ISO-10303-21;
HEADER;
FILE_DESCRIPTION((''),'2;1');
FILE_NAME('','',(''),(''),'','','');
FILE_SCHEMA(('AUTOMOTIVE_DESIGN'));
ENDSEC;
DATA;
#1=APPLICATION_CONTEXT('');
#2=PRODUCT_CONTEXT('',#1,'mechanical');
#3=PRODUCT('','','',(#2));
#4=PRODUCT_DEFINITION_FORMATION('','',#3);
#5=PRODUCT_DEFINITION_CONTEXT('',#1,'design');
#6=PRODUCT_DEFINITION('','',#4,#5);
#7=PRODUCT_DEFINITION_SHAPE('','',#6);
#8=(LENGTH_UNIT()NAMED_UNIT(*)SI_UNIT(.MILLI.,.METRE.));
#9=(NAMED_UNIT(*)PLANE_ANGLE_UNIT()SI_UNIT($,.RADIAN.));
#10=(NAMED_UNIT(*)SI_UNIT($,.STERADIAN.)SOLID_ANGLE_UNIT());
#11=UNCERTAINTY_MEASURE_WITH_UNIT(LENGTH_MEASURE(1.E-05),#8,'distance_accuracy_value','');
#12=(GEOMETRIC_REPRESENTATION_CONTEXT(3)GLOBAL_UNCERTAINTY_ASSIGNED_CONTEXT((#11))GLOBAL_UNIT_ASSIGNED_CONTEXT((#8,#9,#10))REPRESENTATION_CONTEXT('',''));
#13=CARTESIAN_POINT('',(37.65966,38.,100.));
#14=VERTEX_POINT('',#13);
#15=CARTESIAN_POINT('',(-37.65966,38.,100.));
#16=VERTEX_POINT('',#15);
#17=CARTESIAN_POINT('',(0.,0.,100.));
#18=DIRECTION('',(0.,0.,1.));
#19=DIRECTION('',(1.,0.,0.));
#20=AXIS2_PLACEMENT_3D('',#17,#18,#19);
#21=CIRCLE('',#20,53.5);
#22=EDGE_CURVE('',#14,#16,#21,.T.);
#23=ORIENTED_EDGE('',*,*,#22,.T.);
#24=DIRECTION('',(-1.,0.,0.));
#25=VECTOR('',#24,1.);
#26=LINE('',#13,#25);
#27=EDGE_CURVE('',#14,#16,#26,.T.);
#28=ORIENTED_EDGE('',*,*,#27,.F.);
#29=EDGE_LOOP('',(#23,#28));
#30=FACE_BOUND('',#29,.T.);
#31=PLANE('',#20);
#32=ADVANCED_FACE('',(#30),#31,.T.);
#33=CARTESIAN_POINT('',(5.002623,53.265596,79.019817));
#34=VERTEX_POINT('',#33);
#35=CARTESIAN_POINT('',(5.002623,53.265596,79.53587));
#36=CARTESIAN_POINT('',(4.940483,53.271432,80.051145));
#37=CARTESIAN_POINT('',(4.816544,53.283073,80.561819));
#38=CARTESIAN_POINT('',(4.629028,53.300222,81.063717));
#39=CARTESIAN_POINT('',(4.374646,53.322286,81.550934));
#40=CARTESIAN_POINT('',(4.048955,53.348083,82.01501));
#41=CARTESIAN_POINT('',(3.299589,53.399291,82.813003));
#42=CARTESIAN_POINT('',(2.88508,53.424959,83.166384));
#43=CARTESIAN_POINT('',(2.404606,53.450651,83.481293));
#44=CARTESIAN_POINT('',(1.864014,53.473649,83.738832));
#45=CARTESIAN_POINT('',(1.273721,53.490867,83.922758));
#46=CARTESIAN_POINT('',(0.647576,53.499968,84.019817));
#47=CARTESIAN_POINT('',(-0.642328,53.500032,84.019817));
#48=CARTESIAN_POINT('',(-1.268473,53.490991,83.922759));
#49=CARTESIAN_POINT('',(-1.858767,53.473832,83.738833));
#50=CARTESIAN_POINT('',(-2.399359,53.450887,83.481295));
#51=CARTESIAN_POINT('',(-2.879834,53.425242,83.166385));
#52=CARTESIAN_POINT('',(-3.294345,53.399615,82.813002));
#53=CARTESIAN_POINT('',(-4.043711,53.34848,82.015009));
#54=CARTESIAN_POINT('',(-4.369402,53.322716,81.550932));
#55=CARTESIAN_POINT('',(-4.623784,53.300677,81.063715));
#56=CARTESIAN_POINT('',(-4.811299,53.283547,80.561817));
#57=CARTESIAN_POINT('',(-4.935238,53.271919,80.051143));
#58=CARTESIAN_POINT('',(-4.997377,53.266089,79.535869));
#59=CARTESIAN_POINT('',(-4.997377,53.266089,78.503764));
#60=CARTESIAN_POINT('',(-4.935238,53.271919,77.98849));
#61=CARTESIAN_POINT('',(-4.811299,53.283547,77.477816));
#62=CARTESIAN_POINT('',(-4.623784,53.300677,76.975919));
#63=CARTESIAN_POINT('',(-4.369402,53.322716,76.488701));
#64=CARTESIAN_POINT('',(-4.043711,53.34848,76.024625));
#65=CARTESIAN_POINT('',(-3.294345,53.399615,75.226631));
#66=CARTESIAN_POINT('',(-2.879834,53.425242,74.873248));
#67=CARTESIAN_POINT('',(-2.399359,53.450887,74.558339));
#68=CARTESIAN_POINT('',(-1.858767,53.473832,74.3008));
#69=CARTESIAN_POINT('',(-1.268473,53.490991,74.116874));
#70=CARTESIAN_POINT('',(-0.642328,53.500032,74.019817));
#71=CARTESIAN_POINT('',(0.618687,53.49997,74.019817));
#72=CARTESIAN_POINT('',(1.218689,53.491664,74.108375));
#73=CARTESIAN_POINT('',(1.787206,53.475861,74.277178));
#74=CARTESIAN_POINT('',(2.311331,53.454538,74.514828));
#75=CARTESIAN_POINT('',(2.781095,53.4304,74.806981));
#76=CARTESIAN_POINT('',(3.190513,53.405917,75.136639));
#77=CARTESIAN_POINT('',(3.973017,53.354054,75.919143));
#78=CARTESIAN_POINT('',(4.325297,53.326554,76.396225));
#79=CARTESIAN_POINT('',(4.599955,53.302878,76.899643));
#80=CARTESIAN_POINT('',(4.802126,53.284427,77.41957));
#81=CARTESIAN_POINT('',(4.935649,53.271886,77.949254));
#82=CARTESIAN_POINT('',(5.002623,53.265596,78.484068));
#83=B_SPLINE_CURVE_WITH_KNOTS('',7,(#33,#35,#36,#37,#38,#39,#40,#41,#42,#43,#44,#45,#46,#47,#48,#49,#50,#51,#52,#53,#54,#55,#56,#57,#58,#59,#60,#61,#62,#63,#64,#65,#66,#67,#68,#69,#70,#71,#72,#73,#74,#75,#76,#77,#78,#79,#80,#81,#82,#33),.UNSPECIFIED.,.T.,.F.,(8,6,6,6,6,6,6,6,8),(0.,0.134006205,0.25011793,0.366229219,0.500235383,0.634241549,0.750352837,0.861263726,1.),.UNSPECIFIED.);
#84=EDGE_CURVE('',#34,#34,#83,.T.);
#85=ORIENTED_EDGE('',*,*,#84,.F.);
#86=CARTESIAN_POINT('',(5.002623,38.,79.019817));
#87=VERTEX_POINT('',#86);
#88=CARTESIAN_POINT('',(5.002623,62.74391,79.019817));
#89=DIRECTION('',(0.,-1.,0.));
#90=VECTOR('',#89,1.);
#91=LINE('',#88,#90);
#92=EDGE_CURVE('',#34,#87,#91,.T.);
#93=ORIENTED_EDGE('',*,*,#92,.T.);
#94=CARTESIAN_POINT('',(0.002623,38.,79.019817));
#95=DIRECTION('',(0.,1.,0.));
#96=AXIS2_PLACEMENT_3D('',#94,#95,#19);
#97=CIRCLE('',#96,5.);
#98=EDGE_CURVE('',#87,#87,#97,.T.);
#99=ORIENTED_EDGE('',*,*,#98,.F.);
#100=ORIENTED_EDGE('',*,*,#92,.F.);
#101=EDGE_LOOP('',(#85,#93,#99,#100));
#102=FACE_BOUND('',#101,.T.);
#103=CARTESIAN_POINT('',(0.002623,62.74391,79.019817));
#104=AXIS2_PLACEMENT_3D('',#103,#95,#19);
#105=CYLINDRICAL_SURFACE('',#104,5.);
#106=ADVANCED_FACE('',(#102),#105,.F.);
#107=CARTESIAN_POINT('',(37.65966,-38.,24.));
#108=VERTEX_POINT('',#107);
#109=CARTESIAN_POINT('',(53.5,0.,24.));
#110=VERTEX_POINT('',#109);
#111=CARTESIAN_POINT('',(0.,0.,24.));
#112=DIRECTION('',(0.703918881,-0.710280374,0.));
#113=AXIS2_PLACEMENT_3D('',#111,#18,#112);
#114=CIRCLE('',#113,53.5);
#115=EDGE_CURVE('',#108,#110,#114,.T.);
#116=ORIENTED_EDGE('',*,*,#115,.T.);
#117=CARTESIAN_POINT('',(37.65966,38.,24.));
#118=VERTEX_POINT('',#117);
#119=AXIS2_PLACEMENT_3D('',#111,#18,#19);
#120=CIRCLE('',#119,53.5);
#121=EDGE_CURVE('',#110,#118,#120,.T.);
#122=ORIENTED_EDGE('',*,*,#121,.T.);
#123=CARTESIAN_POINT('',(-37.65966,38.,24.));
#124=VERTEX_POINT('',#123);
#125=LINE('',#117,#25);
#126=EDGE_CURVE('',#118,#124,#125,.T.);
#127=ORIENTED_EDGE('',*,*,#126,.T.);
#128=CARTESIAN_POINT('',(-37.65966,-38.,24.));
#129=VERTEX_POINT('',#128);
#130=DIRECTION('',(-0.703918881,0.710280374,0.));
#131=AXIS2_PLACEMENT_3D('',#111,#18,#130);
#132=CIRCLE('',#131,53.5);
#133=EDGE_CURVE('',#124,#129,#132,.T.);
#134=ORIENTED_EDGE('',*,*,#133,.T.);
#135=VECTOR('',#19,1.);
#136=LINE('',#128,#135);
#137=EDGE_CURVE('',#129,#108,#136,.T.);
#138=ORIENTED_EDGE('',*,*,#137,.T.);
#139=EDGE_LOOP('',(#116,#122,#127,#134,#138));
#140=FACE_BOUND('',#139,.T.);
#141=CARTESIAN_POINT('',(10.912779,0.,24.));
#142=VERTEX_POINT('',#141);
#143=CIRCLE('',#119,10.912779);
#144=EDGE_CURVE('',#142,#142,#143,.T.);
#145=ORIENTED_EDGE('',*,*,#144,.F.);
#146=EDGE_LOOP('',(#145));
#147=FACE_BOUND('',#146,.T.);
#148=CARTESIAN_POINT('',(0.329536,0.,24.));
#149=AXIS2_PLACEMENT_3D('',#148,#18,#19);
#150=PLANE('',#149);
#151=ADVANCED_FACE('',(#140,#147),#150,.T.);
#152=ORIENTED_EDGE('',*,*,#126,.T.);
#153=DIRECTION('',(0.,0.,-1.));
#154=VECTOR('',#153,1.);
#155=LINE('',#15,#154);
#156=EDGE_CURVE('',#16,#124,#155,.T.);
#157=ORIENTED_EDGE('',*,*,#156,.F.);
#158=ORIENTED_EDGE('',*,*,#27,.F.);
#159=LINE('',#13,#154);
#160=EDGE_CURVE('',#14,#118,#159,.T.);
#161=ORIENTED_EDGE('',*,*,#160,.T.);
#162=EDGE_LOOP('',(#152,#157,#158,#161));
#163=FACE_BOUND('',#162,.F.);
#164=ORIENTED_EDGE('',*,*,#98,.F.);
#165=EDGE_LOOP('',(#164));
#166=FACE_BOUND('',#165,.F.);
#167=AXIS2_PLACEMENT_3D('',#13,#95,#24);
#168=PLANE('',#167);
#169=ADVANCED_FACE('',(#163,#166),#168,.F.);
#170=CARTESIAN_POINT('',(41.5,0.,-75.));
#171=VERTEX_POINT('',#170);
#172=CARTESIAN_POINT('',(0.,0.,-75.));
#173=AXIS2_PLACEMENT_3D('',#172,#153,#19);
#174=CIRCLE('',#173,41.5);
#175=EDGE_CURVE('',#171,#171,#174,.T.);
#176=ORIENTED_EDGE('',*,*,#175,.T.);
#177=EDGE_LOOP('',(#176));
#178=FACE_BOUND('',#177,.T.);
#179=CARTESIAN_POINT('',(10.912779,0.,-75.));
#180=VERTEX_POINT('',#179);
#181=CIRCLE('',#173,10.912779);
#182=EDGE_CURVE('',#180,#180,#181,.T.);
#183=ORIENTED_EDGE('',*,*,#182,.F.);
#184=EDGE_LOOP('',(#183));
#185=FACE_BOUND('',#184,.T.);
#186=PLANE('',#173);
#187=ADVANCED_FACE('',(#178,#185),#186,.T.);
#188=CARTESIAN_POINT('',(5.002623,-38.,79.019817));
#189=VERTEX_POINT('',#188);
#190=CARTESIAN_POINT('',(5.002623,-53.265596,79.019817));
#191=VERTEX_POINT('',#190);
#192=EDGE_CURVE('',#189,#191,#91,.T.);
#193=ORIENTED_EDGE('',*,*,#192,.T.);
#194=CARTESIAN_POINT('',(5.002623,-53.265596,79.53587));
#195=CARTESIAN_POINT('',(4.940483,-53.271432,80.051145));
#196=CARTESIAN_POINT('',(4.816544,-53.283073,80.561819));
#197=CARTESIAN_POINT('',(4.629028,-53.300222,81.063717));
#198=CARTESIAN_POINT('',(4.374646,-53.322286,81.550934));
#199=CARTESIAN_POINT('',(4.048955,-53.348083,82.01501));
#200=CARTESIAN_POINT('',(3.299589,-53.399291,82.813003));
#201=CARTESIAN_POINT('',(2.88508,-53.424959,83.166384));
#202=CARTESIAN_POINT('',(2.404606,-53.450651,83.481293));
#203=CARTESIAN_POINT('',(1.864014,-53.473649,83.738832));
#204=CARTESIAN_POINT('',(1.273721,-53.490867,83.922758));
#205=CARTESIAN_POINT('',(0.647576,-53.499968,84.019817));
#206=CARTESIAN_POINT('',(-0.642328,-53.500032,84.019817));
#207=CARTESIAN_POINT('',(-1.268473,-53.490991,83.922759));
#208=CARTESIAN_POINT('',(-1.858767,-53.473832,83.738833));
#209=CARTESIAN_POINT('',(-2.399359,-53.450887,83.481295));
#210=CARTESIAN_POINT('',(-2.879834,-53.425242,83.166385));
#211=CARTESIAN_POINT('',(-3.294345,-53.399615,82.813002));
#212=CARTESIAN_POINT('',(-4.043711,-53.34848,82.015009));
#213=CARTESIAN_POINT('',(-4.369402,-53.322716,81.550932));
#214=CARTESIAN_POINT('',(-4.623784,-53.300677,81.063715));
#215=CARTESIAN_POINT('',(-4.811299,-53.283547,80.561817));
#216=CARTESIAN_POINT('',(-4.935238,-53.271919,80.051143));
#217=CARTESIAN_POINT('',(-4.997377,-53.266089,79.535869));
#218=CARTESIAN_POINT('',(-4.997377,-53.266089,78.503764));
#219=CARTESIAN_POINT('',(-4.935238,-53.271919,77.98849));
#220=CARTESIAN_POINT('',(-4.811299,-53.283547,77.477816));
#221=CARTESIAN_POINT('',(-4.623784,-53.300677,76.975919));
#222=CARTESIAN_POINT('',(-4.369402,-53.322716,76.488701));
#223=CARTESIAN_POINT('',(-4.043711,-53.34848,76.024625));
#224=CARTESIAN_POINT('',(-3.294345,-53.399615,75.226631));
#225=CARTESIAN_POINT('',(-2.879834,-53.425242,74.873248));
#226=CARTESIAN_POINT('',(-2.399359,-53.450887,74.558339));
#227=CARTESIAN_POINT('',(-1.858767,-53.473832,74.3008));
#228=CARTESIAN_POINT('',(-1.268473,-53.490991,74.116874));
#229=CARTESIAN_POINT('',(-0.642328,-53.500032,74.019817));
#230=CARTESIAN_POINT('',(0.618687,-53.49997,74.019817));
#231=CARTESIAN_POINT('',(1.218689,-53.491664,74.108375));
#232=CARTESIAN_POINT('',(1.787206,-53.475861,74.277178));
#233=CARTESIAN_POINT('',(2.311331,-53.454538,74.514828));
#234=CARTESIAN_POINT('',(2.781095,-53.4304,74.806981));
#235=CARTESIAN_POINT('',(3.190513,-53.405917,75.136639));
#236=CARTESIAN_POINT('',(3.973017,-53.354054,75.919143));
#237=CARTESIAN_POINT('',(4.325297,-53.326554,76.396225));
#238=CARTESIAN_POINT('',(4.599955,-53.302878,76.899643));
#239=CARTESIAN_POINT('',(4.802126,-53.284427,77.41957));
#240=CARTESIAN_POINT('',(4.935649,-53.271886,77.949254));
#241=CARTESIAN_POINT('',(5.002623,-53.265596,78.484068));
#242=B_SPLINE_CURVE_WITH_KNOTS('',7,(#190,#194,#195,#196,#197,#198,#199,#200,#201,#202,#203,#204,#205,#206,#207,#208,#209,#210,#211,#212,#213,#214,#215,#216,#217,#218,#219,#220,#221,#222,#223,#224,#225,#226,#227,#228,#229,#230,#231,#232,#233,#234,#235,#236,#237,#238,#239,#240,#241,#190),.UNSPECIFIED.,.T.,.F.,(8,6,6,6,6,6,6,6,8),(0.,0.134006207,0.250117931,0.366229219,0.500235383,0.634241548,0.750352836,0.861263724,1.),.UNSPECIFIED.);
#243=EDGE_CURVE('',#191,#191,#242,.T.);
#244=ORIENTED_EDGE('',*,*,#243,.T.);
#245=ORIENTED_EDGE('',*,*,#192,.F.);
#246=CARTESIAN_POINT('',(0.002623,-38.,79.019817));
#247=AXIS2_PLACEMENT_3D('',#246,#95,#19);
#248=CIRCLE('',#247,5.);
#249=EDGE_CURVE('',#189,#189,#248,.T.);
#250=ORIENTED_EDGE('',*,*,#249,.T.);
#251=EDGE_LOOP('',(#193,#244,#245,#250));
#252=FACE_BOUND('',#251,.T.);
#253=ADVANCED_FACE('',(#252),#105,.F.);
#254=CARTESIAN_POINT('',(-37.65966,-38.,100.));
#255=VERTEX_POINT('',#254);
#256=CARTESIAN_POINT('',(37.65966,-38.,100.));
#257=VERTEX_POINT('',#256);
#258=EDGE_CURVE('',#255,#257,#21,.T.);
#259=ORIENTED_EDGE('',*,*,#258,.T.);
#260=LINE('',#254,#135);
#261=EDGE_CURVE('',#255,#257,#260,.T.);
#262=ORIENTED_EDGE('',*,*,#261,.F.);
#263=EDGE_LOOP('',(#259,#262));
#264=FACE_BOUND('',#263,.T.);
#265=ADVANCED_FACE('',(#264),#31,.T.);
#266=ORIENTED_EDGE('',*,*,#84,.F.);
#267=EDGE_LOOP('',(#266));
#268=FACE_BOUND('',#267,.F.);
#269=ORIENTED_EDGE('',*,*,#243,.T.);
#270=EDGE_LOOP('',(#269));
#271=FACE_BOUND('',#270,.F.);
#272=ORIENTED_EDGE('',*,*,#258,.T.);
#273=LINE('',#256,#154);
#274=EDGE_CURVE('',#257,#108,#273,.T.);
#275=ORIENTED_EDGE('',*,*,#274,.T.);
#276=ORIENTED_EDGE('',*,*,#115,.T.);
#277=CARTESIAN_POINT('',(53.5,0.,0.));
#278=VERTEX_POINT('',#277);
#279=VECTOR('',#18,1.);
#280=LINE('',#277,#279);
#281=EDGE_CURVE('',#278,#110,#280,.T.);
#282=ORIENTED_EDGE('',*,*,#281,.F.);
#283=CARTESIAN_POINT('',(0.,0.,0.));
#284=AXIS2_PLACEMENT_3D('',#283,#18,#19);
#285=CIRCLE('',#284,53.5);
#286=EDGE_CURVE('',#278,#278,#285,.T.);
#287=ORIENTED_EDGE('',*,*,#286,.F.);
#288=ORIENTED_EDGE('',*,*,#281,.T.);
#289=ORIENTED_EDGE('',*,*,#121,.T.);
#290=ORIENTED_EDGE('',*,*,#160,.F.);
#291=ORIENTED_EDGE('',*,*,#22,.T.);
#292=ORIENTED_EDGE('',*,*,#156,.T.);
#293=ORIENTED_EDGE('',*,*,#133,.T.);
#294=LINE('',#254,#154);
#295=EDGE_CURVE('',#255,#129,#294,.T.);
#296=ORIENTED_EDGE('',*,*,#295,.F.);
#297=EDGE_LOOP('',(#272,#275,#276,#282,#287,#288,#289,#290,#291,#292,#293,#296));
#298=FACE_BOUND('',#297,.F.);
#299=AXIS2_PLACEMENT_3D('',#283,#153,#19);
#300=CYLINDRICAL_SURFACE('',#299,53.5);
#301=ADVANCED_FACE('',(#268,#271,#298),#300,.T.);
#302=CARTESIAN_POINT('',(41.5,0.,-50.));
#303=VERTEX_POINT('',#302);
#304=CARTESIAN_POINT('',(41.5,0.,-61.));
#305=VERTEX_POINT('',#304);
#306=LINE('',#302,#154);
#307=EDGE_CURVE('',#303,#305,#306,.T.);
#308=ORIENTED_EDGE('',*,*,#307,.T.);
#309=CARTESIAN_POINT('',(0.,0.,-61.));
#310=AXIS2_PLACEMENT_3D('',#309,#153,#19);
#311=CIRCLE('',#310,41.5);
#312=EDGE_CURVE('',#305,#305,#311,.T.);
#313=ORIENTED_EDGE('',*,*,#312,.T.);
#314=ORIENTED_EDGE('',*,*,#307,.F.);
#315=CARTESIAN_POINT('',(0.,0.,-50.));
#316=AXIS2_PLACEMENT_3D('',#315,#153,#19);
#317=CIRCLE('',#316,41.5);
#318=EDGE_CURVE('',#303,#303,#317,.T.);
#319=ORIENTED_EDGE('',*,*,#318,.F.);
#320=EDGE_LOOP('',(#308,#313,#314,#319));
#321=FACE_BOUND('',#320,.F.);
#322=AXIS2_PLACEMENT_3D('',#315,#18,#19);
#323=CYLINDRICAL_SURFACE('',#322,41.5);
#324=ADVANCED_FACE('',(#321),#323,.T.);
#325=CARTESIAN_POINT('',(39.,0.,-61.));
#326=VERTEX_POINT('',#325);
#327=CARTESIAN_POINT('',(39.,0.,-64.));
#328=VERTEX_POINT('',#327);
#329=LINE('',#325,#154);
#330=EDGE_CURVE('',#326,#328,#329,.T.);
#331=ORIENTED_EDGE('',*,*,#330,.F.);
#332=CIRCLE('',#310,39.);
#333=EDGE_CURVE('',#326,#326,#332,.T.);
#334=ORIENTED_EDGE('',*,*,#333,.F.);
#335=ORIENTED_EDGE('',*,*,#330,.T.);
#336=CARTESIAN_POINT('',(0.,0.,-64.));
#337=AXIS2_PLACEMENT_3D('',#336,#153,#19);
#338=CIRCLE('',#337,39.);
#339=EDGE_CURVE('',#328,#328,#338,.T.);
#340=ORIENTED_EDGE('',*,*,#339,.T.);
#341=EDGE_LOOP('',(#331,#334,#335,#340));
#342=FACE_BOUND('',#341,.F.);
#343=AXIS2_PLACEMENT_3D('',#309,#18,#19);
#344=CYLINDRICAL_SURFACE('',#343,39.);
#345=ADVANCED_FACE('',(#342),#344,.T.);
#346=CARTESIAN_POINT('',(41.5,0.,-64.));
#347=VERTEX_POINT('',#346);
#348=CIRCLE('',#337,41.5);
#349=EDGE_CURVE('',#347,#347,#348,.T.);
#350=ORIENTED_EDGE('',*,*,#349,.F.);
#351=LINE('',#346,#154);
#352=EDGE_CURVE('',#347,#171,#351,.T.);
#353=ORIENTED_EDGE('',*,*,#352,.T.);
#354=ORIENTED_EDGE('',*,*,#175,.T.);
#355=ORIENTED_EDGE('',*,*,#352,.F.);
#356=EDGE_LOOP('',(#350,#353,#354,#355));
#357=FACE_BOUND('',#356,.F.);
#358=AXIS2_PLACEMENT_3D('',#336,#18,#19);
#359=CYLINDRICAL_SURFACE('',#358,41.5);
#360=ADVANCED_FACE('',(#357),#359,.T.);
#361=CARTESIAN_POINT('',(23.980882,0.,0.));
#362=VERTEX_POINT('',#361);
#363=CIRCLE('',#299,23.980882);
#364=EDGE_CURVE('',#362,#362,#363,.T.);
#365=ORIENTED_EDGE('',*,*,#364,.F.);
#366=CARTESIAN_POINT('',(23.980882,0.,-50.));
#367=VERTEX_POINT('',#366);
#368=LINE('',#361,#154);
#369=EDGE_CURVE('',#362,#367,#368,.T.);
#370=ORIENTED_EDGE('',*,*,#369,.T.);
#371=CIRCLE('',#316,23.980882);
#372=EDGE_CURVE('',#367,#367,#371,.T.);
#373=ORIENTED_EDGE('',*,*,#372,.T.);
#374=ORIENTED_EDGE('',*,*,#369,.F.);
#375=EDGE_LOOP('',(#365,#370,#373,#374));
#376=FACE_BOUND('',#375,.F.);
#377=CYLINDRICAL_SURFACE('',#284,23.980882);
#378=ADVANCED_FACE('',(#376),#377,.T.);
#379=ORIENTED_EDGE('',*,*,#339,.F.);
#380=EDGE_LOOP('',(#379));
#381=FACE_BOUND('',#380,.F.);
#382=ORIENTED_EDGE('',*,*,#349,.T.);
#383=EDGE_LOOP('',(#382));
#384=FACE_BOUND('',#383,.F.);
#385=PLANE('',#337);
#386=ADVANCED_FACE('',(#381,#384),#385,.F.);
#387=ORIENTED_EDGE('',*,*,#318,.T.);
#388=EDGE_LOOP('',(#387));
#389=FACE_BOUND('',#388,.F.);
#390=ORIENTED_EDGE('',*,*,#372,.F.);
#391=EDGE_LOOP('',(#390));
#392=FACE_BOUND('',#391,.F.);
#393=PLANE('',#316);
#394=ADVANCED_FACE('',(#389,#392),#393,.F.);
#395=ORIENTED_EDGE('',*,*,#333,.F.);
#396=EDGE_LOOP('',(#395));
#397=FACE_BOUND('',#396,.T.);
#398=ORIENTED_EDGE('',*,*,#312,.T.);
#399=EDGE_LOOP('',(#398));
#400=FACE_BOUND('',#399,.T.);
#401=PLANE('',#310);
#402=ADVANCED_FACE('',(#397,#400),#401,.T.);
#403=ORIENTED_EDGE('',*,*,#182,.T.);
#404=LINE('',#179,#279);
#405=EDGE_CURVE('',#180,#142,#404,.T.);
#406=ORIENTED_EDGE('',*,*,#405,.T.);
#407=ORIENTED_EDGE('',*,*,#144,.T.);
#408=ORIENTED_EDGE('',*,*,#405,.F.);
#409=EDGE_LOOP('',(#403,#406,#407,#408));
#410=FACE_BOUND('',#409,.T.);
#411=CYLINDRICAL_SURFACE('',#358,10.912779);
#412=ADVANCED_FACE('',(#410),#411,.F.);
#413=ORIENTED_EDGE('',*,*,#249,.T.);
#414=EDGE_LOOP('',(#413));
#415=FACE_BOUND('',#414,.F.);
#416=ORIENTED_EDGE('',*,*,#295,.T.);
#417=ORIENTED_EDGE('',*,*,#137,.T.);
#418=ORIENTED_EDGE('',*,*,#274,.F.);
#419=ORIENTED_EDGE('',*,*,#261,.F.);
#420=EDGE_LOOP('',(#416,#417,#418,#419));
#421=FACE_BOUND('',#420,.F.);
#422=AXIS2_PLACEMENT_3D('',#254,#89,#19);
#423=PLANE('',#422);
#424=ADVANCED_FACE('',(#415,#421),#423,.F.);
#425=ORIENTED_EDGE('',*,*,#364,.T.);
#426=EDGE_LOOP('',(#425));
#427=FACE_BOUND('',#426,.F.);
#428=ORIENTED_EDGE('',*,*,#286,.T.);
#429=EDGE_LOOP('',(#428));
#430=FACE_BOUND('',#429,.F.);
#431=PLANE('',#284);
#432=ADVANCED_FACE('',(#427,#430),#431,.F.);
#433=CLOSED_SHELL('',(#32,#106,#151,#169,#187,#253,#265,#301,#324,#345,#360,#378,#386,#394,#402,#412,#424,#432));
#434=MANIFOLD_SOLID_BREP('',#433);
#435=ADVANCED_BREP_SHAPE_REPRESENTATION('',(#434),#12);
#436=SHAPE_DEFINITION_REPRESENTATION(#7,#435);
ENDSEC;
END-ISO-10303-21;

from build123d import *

# Parameters (mm, degrees)
F0_R      = 53.5
F0_R_2    = 10.9127793542
F1_DEPTH  = 100
F2_R      = 10.9127793542
F3_DEPTH  = 76
F5_R      = 23.9808815671
F5_R_2    = 10.9127793542
F6_DEPTH  = 50
F7_R      = 41.5
F7_R_2    = 23.9808815671
F7_R_3    = 10.9127793542
F8_DEPTH  = 11
F9_R      = 39
F9_R_2    = 10.9127793542
F10_DEPTH = 3
F11_R     = 41.5
F11_R_2   = 39
F11_R_3   = 10.9127793542
F12_DEPTH = 11
F13_R     = 5
F14_DEPTH = 125


# Not quite as in the source:
# - a feature names something its author has since deleted; it is built from what else it names


with BuildPart() as f1:
    # F0 (on Top) → F1 (new body)
    with BuildSketch(Plane.XY):
        Circle(F0_R)
        Circle(F0_R_2, mode=Mode.SUBTRACT)
    extrude(amount=F1_DEPTH)


with BuildPart() as f3:
    # F2 (on face) → F3 (new body)
    with BuildSketch(Plane.XY.offset(100)):
        with BuildLine():
            ThreePointArc((53.5, 0), (49.381382201, 20.5846810011), (37.6596601153, 38))
            Line((37.6596601153, 38), (-37.6596601153, 38))
            ThreePointArc((-37.6596601153, 38), (-53.5, 0), (-37.6596601153, -38))
            Line((-37.6596601153, -38), (37.6596601153, -38))
            ThreePointArc((37.6596601153, -38), (49.381382201, -20.5846810011), (53.5, 0))
        make_face()
        Circle(F2_R, mode=Mode.SUBTRACT)
    extrude(amount=-F3_DEPTH)


with BuildPart() as f1_1:
    add(f1.part)

    # F4: cut F3
    add(f3.part, mode=Mode.SUBTRACT)

    # F5 (on face) → F6 (join)
    with BuildSketch(Plane(origin=(0, 0, 0), x_dir=(1, 0, 0), z_dir=(0, 0, -1))):
        Circle(F5_R)
        Circle(F5_R_2, mode=Mode.SUBTRACT)
    extrude(amount=F6_DEPTH)

    # F7 (on face) → F8 (join)
    with BuildSketch(Plane(origin=(0, 0, -50), x_dir=(1, 0, 0), z_dir=(0, 0, -1))):
        Circle(F7_R)
        Circle(F7_R_2, mode=Mode.SUBTRACT)
        Circle(F7_R_2)
        Circle(F7_R_3, mode=Mode.SUBTRACT)
    extrude(amount=F8_DEPTH)

    # F9 (on face) → F10 (join)
    with BuildSketch(Plane(origin=(0, 0, -61), x_dir=(1, 0, 0), z_dir=(0, 0, -1))):
        Circle(F9_R)
        Circle(F9_R_2, mode=Mode.SUBTRACT)
    extrude(amount=F10_DEPTH)

    # F11 (on face) → F12 (join)
    with BuildSketch(Plane(origin=(0, 0, -64), x_dir=(1, 0, 0), z_dir=(0, 0, -1))):
        Circle(F11_R)
        Circle(F11_R_2, mode=Mode.SUBTRACT)
        Circle(F11_R_2)
        Circle(F11_R_3, mode=Mode.SUBTRACT)
    extrude(amount=F12_DEPTH)


with BuildPart() as f14:
    # F13 (on Front) → F14 (new body)
    with BuildSketch(Plane.XZ):
        with Locations((-63.11737746, -22.980183363)):
            Circle(F13_R)
    extrude(amount=F14_DEPTH)


with BuildPart() as f14_1:
    # F15: moved
    add(f14.part.moved(Location((63.12, 62.74391, 102))))


with BuildPart() as f1_2:
    add(f1_1.part)

    # F16: cut F14
    add(f14_1.part, mode=Mode.SUBTRACT)


solid = f1_2.part
